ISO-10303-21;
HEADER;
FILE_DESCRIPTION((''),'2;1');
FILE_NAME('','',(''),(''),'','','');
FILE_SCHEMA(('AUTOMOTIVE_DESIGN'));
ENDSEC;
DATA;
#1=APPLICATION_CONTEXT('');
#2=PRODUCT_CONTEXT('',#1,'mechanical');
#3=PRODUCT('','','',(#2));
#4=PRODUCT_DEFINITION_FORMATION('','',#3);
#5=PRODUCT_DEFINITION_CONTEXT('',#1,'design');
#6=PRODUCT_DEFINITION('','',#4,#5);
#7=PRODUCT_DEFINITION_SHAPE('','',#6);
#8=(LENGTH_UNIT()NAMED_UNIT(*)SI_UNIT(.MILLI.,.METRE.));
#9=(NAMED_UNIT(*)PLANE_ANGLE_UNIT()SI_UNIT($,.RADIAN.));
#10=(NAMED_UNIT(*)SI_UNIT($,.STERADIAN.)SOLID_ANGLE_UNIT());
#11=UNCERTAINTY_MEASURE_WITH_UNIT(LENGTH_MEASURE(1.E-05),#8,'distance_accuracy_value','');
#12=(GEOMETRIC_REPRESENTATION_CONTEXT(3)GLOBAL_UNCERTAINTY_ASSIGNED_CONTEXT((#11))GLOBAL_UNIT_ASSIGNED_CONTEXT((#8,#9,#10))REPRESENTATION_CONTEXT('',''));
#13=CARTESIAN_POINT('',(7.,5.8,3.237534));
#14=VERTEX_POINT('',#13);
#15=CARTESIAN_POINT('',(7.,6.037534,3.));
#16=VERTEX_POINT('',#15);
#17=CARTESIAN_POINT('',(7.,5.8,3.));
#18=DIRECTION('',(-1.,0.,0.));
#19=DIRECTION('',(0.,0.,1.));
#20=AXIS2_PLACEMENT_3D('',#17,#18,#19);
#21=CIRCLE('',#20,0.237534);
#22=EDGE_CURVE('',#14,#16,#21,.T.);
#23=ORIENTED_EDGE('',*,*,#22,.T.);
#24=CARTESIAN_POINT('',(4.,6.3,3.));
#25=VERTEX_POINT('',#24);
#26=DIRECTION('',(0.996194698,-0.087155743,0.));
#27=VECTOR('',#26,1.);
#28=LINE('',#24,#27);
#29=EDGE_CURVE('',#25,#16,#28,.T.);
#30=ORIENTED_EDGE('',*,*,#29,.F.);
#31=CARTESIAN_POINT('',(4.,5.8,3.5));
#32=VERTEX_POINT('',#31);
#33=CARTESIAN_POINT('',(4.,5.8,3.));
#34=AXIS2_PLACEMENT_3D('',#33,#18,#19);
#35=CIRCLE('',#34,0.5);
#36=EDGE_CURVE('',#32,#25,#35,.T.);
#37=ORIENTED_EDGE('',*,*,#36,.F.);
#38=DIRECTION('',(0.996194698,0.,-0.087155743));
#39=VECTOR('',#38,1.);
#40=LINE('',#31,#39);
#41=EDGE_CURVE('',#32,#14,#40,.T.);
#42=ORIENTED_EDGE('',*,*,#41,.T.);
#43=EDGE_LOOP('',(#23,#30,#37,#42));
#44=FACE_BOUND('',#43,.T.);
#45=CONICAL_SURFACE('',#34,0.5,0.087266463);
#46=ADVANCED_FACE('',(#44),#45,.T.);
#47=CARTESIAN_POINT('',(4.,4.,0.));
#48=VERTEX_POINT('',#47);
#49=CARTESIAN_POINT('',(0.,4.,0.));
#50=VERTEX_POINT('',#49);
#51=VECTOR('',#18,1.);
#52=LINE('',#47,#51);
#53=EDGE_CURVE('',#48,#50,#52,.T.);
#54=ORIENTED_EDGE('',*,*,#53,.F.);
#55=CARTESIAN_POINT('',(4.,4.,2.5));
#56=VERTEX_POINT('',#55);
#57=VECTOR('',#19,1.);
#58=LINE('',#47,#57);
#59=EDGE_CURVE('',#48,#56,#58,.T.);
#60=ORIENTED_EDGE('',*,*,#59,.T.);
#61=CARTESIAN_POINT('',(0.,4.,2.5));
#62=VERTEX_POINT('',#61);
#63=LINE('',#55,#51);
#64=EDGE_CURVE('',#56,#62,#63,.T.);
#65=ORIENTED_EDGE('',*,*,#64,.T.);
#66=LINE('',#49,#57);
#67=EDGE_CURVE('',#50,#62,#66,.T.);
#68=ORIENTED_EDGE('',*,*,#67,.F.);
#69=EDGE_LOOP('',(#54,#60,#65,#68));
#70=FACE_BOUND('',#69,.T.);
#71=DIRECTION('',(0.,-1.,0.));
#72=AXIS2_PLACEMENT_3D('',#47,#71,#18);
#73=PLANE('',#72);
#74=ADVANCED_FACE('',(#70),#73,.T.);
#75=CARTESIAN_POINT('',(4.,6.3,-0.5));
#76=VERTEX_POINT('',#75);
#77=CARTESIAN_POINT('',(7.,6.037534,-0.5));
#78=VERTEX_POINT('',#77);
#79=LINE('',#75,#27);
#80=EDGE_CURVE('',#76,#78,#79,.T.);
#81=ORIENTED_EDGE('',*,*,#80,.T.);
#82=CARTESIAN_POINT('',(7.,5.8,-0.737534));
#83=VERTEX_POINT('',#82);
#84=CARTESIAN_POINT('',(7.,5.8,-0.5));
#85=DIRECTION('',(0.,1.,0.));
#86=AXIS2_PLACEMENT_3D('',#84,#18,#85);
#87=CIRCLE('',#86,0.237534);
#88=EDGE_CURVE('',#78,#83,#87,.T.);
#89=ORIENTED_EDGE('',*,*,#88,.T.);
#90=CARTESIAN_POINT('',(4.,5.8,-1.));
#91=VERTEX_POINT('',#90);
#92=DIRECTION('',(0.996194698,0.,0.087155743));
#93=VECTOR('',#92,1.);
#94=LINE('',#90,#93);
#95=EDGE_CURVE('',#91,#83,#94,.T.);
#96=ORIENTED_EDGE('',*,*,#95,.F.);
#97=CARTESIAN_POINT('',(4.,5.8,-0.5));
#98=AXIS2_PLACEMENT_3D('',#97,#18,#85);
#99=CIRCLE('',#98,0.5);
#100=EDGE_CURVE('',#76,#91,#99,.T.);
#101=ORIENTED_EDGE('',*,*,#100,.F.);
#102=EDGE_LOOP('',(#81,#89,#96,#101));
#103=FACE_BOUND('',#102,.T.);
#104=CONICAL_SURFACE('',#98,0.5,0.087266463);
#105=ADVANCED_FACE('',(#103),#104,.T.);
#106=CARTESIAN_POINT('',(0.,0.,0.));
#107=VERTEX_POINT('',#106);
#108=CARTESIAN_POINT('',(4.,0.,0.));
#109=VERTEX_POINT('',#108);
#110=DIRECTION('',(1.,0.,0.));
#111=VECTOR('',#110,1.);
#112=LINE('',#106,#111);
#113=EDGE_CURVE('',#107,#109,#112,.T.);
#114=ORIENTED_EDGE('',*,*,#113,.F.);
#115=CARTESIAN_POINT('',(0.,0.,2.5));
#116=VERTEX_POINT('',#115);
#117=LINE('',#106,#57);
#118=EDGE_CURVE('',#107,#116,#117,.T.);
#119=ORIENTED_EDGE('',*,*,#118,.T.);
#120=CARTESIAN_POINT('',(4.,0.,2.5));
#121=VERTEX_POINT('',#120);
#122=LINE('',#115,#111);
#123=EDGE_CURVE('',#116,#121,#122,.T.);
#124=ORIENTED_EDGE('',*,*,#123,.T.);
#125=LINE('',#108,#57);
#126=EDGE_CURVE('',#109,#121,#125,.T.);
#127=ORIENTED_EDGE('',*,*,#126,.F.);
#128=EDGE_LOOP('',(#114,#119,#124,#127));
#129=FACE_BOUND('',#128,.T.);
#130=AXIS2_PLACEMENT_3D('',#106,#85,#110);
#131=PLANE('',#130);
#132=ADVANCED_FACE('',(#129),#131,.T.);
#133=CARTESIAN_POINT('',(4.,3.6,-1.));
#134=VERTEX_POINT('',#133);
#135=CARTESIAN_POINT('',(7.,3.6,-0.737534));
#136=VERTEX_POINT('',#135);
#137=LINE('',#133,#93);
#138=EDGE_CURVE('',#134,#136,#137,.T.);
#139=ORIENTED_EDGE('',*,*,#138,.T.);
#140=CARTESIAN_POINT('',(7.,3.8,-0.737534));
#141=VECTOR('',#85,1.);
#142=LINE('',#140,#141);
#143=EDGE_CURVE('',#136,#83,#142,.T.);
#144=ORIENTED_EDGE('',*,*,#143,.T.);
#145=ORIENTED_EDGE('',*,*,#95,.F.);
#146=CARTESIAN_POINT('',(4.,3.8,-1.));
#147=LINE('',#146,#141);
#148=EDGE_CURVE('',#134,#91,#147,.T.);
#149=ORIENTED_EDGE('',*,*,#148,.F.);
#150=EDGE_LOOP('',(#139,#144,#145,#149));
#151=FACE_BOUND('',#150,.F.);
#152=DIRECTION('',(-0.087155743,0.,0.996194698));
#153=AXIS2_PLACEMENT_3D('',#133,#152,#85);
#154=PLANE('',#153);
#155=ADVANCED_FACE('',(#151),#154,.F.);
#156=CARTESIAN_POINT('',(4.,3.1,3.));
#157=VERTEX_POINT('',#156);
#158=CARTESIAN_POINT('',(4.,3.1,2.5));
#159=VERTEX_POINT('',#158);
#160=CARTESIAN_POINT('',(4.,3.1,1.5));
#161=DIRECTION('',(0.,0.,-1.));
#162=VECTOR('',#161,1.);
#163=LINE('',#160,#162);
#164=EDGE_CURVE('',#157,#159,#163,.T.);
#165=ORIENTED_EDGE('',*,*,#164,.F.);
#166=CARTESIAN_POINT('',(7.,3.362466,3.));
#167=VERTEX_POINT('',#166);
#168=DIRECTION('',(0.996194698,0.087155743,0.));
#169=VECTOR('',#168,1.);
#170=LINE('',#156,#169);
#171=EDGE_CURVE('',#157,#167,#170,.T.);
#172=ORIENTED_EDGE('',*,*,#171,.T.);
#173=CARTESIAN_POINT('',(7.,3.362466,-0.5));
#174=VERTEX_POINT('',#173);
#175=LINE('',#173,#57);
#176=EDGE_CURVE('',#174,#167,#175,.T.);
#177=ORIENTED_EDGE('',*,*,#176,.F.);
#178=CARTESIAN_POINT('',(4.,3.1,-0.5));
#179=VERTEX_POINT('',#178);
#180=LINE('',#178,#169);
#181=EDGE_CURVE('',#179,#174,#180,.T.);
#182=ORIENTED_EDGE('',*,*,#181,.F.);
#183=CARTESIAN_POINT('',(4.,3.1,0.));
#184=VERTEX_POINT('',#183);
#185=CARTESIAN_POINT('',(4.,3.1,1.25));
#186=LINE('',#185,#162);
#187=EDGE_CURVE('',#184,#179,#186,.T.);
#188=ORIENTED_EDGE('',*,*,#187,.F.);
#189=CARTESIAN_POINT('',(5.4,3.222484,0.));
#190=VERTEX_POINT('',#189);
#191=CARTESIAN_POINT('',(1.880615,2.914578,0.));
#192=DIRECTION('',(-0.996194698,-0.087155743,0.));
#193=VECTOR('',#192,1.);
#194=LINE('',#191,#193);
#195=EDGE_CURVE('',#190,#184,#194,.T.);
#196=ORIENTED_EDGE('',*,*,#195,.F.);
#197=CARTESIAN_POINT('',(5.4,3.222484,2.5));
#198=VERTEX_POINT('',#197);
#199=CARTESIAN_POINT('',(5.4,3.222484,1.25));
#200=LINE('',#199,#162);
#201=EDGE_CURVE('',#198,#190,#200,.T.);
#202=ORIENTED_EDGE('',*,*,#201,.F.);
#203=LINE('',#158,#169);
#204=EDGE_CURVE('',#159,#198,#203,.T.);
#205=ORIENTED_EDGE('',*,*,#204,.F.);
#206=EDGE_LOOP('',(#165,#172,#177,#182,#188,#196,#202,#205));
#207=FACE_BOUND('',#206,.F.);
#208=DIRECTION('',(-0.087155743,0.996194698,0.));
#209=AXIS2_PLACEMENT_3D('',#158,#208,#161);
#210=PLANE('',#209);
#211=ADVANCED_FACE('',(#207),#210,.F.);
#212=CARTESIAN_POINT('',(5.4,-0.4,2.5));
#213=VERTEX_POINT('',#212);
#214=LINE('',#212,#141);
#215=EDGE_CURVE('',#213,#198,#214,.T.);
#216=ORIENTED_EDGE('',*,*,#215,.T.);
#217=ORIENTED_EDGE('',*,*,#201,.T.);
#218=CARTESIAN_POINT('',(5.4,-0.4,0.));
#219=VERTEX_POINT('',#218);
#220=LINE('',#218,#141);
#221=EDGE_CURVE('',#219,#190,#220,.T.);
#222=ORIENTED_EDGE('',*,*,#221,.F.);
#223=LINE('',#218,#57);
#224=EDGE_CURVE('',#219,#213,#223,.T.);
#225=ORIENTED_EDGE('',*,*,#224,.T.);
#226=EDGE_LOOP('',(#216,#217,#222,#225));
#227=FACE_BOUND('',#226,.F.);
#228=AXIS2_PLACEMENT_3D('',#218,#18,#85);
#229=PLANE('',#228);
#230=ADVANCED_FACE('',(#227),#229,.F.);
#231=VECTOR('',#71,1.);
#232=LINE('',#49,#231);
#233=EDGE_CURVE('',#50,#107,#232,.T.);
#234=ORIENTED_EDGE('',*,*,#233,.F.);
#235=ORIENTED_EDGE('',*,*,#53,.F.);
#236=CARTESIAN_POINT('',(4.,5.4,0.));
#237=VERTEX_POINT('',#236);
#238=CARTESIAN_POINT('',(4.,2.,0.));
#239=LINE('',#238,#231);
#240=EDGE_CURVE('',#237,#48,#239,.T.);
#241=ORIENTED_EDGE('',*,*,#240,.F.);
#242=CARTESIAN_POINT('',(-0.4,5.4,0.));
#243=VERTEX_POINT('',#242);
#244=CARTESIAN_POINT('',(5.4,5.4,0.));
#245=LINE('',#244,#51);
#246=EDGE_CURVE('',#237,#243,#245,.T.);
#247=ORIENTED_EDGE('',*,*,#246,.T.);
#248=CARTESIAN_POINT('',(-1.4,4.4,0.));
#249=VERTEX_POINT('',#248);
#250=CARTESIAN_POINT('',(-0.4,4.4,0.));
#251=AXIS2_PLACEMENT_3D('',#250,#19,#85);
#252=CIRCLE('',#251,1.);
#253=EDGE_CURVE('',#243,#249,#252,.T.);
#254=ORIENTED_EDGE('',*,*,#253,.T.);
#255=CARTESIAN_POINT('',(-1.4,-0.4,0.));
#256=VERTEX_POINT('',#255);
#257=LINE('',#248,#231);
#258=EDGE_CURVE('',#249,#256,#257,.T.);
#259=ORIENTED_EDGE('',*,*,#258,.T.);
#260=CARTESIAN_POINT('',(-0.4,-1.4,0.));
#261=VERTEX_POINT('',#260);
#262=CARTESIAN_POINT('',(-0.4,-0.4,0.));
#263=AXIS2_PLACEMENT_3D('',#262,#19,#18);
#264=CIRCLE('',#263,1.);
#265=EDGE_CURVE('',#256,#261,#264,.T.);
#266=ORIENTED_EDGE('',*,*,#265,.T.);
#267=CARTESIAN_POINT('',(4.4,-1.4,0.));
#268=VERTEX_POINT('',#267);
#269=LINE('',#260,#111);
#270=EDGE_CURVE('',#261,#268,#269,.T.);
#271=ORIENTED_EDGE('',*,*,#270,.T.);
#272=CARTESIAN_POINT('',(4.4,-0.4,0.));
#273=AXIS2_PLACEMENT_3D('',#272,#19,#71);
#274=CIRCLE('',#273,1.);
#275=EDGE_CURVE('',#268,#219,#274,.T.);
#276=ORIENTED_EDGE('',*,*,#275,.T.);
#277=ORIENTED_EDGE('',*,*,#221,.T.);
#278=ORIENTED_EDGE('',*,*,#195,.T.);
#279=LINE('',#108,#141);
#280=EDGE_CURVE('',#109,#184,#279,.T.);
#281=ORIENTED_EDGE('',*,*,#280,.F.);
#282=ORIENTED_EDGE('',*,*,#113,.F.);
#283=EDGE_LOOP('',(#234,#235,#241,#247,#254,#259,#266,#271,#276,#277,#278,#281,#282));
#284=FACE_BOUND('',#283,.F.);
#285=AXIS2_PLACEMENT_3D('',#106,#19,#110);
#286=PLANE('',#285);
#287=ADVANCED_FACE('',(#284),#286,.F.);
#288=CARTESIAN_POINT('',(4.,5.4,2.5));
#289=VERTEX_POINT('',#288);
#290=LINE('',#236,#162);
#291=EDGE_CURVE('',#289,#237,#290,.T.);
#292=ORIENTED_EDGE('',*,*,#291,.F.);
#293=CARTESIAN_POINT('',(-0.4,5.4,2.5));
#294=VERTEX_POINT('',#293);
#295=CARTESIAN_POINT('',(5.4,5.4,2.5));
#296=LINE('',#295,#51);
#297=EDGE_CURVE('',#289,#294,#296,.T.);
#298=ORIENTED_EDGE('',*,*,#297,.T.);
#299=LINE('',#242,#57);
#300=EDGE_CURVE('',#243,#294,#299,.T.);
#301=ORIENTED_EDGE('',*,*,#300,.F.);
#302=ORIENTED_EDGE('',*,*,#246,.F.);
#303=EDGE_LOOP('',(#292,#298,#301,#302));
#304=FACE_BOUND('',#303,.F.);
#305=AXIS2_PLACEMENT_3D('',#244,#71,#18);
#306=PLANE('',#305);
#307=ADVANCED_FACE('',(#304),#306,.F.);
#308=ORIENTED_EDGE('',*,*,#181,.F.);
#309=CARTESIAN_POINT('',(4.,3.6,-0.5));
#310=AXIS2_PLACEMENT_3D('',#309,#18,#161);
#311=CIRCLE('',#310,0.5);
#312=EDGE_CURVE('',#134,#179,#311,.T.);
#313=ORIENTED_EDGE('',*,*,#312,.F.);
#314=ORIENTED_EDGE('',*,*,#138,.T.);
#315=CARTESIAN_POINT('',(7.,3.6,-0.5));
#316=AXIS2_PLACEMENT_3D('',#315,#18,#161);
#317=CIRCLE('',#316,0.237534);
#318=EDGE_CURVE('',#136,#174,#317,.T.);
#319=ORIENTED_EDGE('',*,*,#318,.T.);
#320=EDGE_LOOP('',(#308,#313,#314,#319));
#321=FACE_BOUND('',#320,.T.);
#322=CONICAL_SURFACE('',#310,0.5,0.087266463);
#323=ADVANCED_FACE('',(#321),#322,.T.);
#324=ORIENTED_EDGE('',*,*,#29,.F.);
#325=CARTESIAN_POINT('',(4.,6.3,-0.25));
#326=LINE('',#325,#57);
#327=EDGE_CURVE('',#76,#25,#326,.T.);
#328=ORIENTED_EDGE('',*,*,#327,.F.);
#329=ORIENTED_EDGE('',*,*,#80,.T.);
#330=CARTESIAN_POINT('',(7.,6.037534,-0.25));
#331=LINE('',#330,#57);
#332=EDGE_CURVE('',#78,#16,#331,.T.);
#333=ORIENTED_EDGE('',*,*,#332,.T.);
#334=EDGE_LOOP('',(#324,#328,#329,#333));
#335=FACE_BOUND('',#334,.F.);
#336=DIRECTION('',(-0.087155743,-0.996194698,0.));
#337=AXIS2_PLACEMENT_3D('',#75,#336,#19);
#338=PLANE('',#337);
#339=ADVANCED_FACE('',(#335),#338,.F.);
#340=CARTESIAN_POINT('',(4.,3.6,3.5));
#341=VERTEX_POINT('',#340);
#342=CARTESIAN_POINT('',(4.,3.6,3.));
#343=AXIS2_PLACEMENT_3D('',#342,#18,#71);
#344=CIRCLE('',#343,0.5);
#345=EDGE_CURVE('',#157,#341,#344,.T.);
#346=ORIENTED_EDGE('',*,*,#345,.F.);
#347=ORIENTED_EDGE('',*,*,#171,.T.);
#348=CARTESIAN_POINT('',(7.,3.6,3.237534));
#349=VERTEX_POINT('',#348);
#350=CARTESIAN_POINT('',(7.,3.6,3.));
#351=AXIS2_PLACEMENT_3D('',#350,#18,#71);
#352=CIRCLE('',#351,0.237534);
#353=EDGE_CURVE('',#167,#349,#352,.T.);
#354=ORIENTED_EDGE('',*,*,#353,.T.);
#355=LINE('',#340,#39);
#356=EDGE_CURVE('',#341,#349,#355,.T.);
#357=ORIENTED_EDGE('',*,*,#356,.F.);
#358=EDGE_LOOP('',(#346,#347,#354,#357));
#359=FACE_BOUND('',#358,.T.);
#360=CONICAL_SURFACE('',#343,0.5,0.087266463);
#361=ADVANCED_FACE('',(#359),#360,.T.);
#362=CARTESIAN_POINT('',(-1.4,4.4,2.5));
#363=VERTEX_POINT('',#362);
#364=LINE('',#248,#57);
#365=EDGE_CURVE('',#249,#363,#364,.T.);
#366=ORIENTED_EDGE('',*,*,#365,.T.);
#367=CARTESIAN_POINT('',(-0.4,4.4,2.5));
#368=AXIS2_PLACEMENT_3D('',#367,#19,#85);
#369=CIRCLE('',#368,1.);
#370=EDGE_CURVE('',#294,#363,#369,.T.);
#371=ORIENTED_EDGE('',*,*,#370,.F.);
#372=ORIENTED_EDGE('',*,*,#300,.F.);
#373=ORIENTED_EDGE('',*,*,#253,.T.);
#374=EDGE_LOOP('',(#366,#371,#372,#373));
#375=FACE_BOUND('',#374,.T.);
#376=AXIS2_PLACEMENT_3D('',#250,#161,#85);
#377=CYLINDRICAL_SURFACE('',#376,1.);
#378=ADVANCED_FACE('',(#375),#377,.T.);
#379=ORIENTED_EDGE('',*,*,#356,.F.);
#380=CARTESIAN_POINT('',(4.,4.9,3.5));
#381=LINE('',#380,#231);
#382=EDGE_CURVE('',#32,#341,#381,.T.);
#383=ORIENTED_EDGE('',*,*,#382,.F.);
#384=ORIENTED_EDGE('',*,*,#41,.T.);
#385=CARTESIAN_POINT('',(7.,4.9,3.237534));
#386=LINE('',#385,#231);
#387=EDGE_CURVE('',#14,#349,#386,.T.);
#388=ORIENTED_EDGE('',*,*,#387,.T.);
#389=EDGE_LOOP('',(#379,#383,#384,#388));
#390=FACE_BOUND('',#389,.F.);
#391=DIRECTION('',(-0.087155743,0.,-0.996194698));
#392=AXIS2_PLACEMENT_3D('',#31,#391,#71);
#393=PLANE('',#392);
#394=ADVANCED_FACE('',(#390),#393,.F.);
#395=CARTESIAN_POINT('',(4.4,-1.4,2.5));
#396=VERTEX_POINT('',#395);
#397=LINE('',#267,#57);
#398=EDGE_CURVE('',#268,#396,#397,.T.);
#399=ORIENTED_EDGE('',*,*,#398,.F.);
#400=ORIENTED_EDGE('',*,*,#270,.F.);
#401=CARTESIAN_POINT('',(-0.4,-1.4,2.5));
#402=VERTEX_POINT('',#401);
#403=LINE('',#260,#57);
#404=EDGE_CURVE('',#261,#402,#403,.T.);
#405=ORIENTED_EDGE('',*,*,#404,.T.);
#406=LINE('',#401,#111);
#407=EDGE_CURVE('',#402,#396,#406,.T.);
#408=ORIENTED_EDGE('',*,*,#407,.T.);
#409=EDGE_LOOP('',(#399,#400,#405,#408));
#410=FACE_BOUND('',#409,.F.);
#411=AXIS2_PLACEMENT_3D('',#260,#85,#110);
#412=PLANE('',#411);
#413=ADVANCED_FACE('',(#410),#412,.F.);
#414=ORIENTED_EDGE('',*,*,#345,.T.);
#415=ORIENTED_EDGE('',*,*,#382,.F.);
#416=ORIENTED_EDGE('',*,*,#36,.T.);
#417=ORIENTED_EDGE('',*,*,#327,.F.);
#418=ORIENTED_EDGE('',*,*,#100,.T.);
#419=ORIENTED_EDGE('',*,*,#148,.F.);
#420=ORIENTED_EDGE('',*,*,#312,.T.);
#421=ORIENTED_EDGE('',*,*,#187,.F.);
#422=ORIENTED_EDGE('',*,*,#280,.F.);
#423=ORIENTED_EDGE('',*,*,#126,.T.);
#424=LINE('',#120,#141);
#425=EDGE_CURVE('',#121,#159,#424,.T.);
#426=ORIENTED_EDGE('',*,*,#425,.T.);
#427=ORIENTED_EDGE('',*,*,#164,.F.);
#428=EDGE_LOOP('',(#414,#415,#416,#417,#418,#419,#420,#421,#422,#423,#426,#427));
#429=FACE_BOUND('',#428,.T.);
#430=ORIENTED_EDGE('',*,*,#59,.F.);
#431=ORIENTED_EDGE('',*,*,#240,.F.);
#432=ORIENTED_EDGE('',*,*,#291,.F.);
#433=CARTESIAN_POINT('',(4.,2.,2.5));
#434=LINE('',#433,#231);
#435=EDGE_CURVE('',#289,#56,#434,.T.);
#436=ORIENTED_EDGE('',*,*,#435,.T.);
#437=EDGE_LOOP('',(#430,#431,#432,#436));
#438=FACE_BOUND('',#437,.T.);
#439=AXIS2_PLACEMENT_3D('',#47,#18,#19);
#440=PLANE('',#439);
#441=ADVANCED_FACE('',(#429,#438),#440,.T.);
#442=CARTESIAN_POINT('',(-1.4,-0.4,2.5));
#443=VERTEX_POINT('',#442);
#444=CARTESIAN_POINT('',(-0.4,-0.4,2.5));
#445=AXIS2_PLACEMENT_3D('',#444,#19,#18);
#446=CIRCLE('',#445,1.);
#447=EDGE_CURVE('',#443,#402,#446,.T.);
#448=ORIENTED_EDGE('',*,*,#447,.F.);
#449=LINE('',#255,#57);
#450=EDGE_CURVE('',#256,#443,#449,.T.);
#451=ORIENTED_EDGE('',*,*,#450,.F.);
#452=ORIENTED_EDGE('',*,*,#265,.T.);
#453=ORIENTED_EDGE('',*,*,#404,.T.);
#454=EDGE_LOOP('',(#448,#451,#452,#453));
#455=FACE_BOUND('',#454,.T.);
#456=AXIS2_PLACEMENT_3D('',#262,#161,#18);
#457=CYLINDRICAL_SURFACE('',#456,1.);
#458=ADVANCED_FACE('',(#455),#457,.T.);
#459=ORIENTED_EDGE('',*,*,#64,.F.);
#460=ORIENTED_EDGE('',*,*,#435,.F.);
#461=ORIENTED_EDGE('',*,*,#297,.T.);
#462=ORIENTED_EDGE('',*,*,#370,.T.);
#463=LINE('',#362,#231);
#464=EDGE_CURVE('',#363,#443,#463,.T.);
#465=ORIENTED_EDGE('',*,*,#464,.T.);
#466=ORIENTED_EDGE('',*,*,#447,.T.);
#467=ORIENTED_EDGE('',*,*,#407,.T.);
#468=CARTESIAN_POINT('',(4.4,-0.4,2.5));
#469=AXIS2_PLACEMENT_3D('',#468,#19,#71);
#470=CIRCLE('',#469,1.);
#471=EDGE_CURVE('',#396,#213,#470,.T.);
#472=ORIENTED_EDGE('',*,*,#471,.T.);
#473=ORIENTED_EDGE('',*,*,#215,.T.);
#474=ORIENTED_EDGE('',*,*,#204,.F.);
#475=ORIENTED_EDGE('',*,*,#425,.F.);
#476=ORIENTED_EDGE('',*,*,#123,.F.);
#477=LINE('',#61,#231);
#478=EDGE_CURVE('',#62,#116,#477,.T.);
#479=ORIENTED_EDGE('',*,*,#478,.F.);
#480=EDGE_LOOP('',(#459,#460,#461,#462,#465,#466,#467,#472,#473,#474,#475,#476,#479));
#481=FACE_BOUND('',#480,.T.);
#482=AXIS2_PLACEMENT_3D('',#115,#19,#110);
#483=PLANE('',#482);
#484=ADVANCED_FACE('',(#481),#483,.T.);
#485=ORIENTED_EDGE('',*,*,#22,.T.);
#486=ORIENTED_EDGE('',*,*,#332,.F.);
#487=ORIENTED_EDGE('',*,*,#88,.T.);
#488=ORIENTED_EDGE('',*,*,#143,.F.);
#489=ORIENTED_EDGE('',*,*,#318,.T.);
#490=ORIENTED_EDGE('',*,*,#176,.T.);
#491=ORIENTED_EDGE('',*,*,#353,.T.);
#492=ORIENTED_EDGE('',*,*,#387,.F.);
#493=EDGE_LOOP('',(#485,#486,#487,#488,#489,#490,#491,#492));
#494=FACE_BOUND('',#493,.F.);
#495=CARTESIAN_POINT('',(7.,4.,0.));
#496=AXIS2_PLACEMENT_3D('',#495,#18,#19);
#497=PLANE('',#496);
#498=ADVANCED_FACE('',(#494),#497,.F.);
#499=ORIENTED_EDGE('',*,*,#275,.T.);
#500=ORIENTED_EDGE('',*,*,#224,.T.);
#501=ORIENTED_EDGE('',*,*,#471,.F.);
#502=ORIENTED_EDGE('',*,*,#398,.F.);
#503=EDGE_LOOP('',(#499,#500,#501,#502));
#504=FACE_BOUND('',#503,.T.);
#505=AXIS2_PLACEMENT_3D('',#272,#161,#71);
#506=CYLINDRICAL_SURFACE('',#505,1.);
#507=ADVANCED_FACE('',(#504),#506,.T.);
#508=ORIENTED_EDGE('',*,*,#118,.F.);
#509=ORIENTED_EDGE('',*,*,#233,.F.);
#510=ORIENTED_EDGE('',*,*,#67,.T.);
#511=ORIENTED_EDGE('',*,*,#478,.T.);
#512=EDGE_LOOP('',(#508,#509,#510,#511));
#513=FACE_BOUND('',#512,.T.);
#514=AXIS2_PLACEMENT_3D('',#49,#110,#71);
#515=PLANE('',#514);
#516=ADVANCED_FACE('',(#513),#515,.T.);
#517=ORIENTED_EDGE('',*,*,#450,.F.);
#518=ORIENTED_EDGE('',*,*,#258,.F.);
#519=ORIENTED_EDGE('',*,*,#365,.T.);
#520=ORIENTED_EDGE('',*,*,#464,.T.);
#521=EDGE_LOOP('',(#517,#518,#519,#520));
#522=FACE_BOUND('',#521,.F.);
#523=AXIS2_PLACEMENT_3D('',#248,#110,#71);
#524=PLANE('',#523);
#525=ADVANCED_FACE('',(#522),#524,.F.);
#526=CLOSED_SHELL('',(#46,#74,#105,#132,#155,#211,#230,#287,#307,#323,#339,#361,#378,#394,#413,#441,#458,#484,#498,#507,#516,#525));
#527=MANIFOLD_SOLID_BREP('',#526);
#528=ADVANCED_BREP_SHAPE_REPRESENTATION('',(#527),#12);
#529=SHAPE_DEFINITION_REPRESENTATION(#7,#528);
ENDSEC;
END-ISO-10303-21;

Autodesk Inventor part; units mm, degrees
ref_plane "YZ Plane" through (0, 0, 0) normal (1, 0, 0) x (0, 1, 0)
ref_plane "XZ Plane" through (0, 0, 0) normal (0, 1, 0) x (-1, 0, 0)
ref_plane "XY Plane" through (0, 0, 0) normal (0, 0, 1) x (1, 0, 0)
sketch "Sketch1" plane through (0, 0, 0) normal (0, 0, 1) x (1, 0, 0)
  line L0 (0, 0) -> (4, 0)
  line L1 (4, 0) -> (4, 4)
  line L2 (4, 4) -> (0, 4)
  line L3 (0, 4) -> (0, 0)
  line L4 (-0.4, -1.4) -> (4.4, -1.4)
  line L5 (5.4, -0.4) -> (5.4, 5.4)
  line L6 (5.4, 5.4) -> (-0.4, 5.4)
  line L7 (-1.4, 4.4) -> (-1.4, -0.4)
  arc A0 (-0.4, 5.4) -> (-1.4, 4.4) centre (-0.4, 4.4) ccw
  arc A1 (-1.4, -0.4) -> (-0.4, -1.4) centre (-0.4, -0.4) ccw
  arc A2 (4.4, -1.4) -> (5.4, -0.4) centre (4.4, -0.4) ccw
  point P0 (-1.4, -1.4)
  point P1 (5.4, -1.4)
  point P2 (-1.4, 5.4)
  dimension "d0" = 4
  dimension "d1" = 4
  dimension "d2" = 1.4
  dimension "d5" = 1
extrude "Extrusion1" add sketch "Sketch1" along normal blind 2.5
sketch "草圖3" plane through (4, 4, 0) normal (-1, 0, 0) x (0, 0, 1)
  line L0 (2.5, 0) -> (2.5, -4) projected
  line L1 (-0.5, 2.3) -> (3, 2.3)
  line L2 (3.5, 1.8) -> (3.5, -0.4)
  line L3 (3, -0.9) -> (-0.5, -0.9)
  line L4 (-1, -0.4) -> (-1, 1.8)
  line L5 (0, -5.4) -> (2.5, -5.4) projected
  arc A0 (-0.5, 2.3) -> (-1, 1.8) centre (-0.5, 1.8) ccw
  arc A1 (-1, -0.4) -> (-0.5, -0.9) centre (-0.5, -0.4) ccw
  arc A2 (3, -0.9) -> (3.5, -0.4) centre (3, -0.4) ccw
  arc A3 (3.5, 1.8) -> (3, 2.3) centre (3, 1.8) ccw
  point P0 (-1, 2.3)
  point P1 (3.5, -0.9)
  point P2 (3.5, 2.3)
  dimension "d14" = 4.5
  dimension "d16" = 3.2
  dimension "d17" = 4.5
  dimension "d18" = 1
  dimension "d19" = 0.5
extrude "擠出3" add sketch "草圖3" against normal blind 3 draft -5
properties part number "fastener_04"
